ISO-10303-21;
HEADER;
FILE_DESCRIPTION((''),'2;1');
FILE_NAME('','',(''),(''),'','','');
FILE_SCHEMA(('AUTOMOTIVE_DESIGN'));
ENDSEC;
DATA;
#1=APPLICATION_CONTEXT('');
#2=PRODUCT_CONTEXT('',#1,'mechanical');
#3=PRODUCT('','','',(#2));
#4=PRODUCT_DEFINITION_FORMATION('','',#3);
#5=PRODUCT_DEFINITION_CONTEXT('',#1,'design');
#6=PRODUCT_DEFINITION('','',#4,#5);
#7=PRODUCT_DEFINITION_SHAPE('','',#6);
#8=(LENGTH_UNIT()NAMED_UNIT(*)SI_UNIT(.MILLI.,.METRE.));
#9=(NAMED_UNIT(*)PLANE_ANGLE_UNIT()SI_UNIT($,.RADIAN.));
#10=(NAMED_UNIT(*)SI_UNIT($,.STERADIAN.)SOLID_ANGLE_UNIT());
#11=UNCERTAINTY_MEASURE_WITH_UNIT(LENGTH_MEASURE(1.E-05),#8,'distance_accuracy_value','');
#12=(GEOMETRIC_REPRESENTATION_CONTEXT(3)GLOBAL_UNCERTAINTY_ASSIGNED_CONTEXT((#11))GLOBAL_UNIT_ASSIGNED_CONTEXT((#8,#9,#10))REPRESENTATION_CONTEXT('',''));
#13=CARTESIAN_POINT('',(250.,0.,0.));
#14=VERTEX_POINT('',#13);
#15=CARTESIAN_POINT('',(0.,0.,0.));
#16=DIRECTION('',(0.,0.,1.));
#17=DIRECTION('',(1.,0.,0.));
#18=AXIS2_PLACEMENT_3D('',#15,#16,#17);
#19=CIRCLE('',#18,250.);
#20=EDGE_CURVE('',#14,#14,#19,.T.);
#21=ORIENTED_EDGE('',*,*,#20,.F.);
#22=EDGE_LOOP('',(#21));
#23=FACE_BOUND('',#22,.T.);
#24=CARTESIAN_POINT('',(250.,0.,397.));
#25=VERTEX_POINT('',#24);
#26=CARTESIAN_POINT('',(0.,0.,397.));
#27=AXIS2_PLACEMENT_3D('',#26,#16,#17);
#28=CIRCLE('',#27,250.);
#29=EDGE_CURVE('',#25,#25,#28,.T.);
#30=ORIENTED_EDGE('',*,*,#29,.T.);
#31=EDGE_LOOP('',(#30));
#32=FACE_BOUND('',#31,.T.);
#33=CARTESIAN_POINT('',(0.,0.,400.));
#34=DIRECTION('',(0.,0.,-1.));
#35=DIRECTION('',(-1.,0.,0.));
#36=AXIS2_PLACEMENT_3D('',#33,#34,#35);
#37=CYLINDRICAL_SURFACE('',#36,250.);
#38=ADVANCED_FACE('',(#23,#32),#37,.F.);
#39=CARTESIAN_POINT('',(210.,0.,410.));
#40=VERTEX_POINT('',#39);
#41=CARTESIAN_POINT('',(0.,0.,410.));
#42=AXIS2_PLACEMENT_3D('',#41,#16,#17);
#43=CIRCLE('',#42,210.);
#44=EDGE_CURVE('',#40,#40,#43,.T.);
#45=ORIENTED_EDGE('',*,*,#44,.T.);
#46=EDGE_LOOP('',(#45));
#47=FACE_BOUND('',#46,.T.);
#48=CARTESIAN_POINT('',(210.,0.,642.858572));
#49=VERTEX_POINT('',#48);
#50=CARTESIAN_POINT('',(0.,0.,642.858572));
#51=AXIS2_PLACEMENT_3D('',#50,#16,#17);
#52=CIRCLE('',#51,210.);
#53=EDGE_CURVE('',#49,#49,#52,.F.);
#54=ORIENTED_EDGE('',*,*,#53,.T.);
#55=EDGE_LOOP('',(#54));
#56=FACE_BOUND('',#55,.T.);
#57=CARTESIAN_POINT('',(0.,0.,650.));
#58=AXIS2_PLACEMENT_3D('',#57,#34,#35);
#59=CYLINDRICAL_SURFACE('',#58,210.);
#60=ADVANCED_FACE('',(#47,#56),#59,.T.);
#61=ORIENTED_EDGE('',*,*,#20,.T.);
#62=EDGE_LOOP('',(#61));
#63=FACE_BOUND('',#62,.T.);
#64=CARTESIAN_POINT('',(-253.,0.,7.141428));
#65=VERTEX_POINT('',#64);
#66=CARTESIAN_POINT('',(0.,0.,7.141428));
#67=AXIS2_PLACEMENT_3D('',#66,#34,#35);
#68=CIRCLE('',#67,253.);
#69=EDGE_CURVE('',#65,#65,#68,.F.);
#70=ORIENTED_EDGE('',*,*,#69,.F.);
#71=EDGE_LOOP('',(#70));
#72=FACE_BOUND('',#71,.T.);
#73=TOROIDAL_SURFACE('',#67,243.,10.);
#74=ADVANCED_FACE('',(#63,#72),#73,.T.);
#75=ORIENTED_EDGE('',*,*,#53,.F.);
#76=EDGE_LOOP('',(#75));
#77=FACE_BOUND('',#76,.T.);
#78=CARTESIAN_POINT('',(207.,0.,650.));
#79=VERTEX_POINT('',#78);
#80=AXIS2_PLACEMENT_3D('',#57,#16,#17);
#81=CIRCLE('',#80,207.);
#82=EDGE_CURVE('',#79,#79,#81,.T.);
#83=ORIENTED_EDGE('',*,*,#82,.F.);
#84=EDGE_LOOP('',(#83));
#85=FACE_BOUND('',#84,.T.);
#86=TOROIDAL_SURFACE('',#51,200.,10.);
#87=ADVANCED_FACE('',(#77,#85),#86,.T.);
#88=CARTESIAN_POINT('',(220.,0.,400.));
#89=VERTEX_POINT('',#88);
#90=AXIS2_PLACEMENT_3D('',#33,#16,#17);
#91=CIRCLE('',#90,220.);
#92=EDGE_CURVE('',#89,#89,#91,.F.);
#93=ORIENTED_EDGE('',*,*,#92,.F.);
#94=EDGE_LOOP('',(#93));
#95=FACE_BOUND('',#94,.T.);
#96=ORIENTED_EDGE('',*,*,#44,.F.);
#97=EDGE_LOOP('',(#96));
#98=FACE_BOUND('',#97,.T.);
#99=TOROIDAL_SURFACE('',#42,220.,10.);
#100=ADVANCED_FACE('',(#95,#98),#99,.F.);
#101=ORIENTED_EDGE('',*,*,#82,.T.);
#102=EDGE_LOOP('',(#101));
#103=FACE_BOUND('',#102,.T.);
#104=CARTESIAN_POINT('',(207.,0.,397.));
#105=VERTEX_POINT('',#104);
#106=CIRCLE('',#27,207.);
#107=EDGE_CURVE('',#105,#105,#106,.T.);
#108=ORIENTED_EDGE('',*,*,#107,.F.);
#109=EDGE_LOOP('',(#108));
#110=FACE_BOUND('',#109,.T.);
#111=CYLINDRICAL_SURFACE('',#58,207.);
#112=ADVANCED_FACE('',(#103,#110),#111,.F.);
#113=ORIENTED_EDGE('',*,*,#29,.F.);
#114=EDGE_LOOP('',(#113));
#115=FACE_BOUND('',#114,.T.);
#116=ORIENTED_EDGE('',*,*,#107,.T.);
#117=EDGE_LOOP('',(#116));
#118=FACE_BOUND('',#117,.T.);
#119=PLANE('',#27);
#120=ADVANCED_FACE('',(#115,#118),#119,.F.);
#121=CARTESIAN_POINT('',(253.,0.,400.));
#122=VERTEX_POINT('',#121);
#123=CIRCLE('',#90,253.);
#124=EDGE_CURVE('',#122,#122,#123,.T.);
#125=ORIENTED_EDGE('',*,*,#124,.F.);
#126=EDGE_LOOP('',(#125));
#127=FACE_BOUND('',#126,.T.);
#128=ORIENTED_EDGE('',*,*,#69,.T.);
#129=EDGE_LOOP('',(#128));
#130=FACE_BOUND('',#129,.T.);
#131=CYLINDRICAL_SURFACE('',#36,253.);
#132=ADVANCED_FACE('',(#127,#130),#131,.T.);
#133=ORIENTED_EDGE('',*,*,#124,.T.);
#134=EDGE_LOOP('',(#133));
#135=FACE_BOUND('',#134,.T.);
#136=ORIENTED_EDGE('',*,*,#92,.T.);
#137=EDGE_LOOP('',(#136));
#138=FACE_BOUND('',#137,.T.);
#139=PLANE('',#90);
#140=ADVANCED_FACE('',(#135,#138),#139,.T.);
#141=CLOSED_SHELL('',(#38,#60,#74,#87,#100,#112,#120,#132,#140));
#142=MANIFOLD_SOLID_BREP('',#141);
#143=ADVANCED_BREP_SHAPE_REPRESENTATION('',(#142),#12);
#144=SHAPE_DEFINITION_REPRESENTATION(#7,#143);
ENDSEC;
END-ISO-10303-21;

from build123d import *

# Parameters (mm, degrees)
SKETCH1_R           = 253
BOSS_EXTRUDE1_DEPTH = 400
SKETCH2_R           = 210
BOSS_EXTRUDE2_DEPTH = 250
SHELL1_T            = -3
FILLET1_R           = 10


with BuildPart() as part:
    # Sketch1 → Boss-Extrude1 (new body)
    with BuildSketch(Plane.XY):
        Circle(SKETCH1_R)
    extrude(amount=BOSS_EXTRUDE1_DEPTH)

    # Sketch2 → Boss-Extrude2 (add)
    with BuildSketch(Plane.XY.offset(400)):
        Circle(SKETCH2_R)
    extrude(amount=BOSS_EXTRUDE2_DEPTH)

    # Shell1
    shell1_openings = [part.faces().sort_by_distance(p)[0] for p in [
        (0, 0, 0),
        (0, 0, 650),
    ]]
    offset(amount=SHELL1_T, openings=shell1_openings, kind=Kind.INTERSECTION)

    # Fillet1
    # the kernel refuses this fillet: 10 mm, written as the material it adds along each edge
    with BuildSketch(Plane(origin=(0, 0, 400), x_dir=(1, 0, 0), z_dir=(0, -1, 0))) as fillet1_piece_1:
        with BuildLine():
            CenterArc((210 + FILLET1_R, FILLET1_R), FILLET1_R, 180, 90)
            Line((210, FILLET1_R), (210, 0))
            Line((210, 0), (210 + FILLET1_R, 0))
        make_face()
    revolve(axis=Axis((0, 0, 400), (0, 0, 1)))
    # the kernel refuses this fillet: 10 mm, written as the material it takes off along each edge
    with BuildSketch(Plane(origin=(0, 0, 0), x_dir=(1, 0, 0), z_dir=(0, -1, 0))) as fillet1_2_piece_1:
        with BuildLine():
            CenterArc((243, 7.141428429), FILLET1_R, 314.427004001, 45.572995999)
            Line((250, 0), (253, 0))
            Line((253, 0), (253, 7.141428429))
        make_face()
    revolve(axis=Axis((0, 0, 0), (0, 0, 1)), mode=Mode.SUBTRACT)
    with BuildSketch(Plane(origin=(0, 0, 650), x_dir=(1, 0, 0), z_dir=(0, -1, 0))) as fillet1_2_piece_2:
        with BuildLine():
            CenterArc((200, -7.141428429), FILLET1_R, 0, 45.572995999)
            Line((207, 0), (210, 0))
            Line((210, 0), (210, -7.141428429))
        make_face()
    revolve(axis=Axis((0, 0, 650), (0, 0, 1)), mode=Mode.SUBTRACT)


solid = part.part
